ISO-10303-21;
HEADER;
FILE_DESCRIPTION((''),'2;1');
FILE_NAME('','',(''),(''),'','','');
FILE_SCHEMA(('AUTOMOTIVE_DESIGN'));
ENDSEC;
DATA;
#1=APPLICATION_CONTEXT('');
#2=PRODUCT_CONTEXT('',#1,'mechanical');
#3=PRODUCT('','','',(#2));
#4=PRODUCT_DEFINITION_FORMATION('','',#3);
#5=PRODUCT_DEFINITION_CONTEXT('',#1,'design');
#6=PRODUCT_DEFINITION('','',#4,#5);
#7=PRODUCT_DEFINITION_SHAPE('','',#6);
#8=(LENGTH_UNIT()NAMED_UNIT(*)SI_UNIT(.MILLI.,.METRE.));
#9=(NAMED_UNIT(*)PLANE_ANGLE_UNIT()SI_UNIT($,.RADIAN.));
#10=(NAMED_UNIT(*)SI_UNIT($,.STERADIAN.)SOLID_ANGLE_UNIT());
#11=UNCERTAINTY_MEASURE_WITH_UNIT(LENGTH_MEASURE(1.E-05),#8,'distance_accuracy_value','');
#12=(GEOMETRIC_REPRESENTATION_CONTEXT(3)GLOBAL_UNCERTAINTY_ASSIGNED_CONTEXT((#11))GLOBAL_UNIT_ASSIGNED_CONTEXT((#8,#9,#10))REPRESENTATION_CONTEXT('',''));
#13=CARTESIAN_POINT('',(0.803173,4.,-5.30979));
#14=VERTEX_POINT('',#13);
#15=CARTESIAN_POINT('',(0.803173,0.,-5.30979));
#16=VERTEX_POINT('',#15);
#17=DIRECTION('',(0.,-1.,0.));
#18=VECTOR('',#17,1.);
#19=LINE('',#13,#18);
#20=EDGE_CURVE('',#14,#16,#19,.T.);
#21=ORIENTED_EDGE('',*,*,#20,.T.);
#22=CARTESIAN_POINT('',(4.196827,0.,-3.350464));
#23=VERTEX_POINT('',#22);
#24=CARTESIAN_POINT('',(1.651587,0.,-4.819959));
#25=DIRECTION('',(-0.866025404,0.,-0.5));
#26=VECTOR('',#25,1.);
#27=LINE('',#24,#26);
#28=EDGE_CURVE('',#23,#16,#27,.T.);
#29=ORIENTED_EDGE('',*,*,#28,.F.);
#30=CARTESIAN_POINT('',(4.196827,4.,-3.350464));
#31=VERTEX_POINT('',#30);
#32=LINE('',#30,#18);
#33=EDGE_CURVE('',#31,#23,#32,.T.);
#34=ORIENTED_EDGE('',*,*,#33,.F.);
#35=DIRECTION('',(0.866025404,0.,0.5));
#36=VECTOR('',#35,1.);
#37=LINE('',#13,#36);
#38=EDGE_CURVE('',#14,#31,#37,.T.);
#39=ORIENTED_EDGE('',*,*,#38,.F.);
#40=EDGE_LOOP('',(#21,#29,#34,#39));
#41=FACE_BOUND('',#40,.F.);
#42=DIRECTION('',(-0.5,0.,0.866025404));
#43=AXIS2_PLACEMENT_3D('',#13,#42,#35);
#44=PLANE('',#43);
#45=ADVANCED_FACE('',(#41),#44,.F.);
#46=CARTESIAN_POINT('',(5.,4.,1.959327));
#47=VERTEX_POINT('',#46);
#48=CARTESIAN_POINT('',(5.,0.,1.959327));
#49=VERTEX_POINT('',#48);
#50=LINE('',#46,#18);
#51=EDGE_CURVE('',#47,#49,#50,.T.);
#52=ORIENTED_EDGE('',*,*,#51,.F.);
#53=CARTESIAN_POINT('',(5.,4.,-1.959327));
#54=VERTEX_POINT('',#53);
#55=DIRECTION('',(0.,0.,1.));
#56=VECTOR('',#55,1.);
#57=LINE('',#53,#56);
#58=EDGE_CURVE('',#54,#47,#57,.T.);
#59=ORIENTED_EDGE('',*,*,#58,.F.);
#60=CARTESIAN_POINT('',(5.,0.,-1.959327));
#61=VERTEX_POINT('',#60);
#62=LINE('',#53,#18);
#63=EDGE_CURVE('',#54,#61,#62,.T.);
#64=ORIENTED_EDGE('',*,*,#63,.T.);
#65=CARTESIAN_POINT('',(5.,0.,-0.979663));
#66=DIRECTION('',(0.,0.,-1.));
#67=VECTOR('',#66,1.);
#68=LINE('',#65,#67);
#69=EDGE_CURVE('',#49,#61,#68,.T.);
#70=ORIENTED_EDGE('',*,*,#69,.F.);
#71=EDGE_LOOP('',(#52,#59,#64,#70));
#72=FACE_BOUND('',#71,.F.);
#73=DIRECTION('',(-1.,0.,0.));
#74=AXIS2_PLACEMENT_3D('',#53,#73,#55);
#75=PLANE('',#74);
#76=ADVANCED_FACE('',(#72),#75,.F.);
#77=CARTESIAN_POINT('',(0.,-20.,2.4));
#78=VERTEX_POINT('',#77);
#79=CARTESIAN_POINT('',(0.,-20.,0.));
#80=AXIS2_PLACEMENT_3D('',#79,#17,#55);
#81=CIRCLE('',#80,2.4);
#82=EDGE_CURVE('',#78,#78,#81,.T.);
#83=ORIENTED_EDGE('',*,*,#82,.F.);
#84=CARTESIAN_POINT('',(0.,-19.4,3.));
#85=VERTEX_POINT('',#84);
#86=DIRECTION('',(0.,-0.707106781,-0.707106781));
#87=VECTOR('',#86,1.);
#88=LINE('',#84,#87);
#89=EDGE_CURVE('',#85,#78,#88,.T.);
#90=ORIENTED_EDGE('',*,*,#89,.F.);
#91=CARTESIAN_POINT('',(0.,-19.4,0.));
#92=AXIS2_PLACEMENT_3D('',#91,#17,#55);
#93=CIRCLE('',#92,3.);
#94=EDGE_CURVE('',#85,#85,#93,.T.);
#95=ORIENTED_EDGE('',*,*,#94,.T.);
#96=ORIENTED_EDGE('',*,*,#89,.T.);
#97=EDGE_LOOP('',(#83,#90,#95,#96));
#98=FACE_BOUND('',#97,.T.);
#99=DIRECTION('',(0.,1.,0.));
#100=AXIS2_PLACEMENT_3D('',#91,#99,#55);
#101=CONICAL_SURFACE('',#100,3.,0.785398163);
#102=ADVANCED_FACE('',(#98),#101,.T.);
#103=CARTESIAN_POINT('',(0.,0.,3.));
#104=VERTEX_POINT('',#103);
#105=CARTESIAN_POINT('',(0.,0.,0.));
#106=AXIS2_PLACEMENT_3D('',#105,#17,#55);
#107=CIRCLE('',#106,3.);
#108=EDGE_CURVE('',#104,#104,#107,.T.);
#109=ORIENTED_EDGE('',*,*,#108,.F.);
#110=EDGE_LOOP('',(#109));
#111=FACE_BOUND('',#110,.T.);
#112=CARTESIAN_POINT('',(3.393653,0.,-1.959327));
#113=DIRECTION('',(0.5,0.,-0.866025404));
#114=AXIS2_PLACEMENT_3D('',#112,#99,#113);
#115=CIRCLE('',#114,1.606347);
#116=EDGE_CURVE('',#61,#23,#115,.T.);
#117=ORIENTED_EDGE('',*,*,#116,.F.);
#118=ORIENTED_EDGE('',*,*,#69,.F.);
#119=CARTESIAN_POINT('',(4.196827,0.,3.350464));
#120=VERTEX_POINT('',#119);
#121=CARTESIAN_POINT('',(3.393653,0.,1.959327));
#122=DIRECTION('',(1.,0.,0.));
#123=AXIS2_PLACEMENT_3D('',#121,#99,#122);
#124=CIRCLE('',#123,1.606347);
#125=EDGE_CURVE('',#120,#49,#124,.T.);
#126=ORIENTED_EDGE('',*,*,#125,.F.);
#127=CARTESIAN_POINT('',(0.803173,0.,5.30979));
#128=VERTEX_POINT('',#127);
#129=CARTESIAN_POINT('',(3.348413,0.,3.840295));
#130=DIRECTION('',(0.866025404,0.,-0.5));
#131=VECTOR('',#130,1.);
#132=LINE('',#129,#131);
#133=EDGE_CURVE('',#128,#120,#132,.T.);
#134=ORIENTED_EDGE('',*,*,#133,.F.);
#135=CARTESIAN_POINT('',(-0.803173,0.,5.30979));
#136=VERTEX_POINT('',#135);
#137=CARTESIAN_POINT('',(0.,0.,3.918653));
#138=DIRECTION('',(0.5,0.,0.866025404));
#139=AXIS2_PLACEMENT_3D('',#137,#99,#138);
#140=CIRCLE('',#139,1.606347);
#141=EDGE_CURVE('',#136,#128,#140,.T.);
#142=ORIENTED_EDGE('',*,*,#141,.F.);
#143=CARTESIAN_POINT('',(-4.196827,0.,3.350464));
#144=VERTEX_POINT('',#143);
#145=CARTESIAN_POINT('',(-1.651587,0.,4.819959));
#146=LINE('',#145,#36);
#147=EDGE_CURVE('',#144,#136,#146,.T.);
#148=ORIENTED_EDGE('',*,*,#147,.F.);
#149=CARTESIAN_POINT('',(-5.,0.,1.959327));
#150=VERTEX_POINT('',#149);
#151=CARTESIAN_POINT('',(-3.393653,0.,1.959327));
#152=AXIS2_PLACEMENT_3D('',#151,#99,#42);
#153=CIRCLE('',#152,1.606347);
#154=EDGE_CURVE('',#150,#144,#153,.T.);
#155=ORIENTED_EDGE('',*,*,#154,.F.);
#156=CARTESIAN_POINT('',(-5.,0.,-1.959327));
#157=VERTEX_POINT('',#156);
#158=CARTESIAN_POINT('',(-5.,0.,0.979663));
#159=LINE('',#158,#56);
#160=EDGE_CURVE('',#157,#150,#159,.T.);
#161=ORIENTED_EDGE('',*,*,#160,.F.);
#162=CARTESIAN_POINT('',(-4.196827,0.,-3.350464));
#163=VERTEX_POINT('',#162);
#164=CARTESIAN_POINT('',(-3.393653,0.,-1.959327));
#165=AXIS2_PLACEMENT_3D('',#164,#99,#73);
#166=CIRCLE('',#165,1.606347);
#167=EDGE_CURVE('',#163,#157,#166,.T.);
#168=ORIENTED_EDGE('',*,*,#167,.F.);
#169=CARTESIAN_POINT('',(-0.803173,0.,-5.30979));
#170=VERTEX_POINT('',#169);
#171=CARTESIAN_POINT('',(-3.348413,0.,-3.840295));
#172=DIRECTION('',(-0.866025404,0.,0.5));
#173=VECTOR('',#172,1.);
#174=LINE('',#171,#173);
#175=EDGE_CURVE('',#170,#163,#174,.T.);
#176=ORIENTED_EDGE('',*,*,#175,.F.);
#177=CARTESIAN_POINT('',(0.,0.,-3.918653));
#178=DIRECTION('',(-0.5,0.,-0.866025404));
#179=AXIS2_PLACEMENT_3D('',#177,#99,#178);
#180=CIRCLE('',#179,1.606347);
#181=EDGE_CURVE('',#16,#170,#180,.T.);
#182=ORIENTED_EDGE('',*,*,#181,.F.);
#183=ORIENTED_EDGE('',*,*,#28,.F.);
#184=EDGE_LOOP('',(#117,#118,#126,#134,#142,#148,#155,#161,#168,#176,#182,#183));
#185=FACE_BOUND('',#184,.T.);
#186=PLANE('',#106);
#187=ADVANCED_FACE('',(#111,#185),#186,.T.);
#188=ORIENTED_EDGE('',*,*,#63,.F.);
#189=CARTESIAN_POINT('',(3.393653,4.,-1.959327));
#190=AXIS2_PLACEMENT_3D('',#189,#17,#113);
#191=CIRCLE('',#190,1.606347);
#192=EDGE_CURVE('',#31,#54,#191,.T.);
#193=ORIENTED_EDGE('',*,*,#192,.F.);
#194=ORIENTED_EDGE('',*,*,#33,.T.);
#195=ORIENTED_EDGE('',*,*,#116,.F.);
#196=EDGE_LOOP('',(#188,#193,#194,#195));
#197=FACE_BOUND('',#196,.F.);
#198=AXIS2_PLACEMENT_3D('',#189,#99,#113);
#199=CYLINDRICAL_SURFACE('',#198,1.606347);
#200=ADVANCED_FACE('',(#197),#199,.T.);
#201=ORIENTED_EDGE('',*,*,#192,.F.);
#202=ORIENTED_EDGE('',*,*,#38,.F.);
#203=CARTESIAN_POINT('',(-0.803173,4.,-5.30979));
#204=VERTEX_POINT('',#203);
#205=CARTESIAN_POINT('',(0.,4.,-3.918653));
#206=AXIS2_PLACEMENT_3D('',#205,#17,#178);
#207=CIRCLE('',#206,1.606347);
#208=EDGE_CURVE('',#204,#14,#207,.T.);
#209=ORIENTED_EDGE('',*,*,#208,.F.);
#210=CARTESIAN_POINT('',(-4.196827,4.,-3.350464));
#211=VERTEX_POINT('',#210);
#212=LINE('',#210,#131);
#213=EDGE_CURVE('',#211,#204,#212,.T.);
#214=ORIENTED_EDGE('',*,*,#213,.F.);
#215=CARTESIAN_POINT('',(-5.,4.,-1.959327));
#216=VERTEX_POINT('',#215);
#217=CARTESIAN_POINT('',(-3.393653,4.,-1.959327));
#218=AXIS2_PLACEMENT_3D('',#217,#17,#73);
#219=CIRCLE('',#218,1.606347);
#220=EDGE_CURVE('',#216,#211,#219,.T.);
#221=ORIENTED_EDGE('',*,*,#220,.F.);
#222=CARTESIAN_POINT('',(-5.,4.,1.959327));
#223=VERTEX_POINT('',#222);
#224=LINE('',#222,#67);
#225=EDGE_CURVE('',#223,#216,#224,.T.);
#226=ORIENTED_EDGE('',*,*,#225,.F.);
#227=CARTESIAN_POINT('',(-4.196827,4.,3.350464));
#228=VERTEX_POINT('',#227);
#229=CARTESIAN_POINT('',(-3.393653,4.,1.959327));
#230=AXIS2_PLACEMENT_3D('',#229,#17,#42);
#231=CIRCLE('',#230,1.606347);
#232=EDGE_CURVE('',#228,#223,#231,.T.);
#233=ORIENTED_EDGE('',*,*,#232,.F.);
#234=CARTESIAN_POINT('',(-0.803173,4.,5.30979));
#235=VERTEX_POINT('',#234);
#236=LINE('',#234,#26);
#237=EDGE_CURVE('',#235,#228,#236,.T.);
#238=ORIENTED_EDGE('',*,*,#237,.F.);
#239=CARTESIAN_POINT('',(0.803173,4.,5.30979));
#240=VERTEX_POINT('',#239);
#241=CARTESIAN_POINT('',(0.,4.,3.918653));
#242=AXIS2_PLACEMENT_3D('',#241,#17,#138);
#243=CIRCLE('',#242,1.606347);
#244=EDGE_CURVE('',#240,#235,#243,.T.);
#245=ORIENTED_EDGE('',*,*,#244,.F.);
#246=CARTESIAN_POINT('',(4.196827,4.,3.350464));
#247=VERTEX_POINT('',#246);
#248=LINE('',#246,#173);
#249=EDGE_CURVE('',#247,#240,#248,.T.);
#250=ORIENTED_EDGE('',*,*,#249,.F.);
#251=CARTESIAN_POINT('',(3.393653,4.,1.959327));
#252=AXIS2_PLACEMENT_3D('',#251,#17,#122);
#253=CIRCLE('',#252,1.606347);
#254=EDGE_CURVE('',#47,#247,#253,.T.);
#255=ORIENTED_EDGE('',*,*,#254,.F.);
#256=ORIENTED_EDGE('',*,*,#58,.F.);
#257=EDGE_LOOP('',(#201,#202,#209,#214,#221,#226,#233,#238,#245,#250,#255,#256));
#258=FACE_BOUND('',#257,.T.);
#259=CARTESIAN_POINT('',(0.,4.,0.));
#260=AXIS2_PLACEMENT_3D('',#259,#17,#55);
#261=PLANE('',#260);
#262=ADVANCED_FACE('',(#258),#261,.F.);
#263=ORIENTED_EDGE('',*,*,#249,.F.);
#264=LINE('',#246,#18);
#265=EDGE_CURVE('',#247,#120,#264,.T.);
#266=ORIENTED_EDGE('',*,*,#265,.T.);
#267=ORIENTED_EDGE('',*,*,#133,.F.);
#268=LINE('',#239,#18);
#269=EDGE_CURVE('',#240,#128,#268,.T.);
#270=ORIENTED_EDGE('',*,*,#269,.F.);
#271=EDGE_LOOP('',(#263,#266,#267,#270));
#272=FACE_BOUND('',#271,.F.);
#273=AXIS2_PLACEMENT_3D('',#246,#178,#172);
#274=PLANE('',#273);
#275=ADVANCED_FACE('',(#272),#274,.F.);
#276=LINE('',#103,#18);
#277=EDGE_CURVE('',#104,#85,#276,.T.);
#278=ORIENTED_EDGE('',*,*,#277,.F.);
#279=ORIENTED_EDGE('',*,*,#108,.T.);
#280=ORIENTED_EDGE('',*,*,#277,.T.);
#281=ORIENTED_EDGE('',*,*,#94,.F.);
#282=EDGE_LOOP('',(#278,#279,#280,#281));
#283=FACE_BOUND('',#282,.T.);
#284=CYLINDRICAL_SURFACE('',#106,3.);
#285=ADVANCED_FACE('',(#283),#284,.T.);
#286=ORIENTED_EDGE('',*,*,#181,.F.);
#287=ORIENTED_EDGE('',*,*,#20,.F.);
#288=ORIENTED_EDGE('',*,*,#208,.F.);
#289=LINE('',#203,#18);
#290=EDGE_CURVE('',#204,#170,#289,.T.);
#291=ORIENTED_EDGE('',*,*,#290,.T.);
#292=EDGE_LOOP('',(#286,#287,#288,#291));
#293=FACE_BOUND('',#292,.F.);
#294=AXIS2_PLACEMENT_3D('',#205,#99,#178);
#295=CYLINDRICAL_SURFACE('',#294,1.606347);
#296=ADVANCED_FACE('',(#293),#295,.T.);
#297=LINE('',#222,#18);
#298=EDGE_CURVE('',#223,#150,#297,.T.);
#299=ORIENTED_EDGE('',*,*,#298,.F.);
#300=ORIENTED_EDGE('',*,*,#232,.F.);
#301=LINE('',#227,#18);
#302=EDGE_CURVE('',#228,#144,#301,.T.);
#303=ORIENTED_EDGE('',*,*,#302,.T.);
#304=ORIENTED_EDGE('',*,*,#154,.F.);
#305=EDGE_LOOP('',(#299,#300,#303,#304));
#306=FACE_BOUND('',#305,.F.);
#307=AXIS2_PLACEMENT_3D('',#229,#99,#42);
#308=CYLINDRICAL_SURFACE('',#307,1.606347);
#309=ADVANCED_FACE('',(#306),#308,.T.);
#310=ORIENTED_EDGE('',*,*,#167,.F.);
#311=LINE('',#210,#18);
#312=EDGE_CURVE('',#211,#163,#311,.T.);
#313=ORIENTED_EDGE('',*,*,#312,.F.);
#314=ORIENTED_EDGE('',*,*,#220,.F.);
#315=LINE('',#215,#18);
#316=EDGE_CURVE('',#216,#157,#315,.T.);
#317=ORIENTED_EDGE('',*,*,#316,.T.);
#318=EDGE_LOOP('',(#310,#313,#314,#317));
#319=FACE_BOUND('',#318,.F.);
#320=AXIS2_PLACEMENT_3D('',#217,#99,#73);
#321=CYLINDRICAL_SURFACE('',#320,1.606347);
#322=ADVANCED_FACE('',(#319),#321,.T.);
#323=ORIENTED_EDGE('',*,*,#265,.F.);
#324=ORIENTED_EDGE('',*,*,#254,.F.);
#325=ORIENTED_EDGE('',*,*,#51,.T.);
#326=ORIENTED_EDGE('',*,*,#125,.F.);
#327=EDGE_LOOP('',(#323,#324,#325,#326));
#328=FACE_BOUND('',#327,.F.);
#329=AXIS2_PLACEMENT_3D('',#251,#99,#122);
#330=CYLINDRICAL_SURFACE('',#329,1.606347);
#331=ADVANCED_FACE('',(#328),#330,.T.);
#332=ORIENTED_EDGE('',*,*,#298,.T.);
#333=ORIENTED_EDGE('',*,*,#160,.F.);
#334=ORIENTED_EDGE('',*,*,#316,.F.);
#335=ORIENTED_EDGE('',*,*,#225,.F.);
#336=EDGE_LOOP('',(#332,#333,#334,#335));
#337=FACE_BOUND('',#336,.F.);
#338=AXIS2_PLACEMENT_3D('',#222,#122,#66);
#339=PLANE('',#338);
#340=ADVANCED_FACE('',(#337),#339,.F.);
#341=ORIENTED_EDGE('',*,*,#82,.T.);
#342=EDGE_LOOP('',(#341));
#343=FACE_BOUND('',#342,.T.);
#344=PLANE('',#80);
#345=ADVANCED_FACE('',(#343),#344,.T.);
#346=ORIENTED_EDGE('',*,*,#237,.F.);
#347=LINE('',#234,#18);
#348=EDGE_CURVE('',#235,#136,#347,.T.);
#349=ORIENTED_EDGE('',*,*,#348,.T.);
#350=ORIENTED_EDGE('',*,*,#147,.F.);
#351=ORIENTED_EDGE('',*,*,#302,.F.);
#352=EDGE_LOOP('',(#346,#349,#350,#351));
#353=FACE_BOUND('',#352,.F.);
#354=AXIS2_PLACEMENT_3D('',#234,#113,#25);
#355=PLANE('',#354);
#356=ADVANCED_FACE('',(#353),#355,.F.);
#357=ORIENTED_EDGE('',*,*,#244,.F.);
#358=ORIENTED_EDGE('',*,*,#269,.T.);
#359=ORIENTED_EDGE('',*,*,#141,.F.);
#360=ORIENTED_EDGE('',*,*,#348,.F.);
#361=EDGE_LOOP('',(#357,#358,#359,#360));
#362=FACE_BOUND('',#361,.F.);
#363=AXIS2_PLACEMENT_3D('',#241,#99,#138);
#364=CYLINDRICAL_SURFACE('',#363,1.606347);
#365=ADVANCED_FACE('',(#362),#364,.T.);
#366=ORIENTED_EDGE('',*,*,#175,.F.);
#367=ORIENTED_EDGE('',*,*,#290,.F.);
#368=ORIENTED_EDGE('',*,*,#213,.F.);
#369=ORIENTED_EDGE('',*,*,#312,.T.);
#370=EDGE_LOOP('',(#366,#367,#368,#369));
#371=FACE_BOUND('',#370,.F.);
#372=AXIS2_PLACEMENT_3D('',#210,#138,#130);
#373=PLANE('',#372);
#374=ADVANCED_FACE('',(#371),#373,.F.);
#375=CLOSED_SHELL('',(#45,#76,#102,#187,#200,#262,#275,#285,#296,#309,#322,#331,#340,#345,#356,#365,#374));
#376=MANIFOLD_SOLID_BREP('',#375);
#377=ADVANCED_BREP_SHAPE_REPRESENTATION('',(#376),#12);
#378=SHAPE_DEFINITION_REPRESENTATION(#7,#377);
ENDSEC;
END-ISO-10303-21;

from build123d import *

# Parameters (mm, degrees)
F2_R     = 8.2875
F3_DEPTH = 25


# Not quite as in the source:
# - a feature names something its author has since deleted; it is built from what else it names


with BuildPart() as f1:
    # F0 (on Right) → F1 (revolve)
    with BuildSketch(Plane.YZ):
        Polygon((0, 8.2875), (0, 3), (-19.4, 3), (-20, 2.4), (-20, 0), (4, 0), (4, 8.2875), align=None)
    revolve(axis=Axis((0, -8, 0), (0, -1, 0)))

    # F2 (on face) → F3 (cut)
    with BuildSketch(Plane(origin=(0, 4, 0), x_dir=(-1, 0, 0), z_dir=(0, 1, 0))):
        Circle(F2_R)
        with BuildLine():
            ThreePointArc((0.803173326, -5.3097903559), (0, -5.525), (-0.803173326, -5.3097903559))
            Line((-0.803173326, -5.3097903559), (-4.196826674, -3.3504636819))
            ThreePointArc((-4.196826674, -3.3504636819), (-4.7847903559, -2.7625), (-5, -1.959326674))
            Line((-5, -1.959326674), (-5, 1.959326674))
            ThreePointArc((-5, 1.959326674), (-4.7847903559, 2.7625), (-4.196826674, 3.3504636819))
            Line((-4.196826674, 3.3504636819), (-0.803173326, 5.3097903559))
            ThreePointArc((-0.803173326, 5.3097903559), (0, 5.525), (0.803173326, 5.3097903559))
            Line((0.803173326, 5.3097903559), (4.196826674, 3.3504636819))
            ThreePointArc((4.196826674, 3.3504636819), (4.7847903559, 2.7625), (5, 1.959326674))
            Line((5, 1.959326674), (5, -1.959326674))
            ThreePointArc((5, -1.959326674), (4.7847903559, -2.7625), (4.196826674, -3.3504636819))
            Line((4.196826674, -3.3504636819), (0.803173326, -5.3097903559))
        make_face(mode=Mode.SUBTRACT)
    extrude(amount=-F3_DEPTH, mode=Mode.SUBTRACT)


solid = f1.part
